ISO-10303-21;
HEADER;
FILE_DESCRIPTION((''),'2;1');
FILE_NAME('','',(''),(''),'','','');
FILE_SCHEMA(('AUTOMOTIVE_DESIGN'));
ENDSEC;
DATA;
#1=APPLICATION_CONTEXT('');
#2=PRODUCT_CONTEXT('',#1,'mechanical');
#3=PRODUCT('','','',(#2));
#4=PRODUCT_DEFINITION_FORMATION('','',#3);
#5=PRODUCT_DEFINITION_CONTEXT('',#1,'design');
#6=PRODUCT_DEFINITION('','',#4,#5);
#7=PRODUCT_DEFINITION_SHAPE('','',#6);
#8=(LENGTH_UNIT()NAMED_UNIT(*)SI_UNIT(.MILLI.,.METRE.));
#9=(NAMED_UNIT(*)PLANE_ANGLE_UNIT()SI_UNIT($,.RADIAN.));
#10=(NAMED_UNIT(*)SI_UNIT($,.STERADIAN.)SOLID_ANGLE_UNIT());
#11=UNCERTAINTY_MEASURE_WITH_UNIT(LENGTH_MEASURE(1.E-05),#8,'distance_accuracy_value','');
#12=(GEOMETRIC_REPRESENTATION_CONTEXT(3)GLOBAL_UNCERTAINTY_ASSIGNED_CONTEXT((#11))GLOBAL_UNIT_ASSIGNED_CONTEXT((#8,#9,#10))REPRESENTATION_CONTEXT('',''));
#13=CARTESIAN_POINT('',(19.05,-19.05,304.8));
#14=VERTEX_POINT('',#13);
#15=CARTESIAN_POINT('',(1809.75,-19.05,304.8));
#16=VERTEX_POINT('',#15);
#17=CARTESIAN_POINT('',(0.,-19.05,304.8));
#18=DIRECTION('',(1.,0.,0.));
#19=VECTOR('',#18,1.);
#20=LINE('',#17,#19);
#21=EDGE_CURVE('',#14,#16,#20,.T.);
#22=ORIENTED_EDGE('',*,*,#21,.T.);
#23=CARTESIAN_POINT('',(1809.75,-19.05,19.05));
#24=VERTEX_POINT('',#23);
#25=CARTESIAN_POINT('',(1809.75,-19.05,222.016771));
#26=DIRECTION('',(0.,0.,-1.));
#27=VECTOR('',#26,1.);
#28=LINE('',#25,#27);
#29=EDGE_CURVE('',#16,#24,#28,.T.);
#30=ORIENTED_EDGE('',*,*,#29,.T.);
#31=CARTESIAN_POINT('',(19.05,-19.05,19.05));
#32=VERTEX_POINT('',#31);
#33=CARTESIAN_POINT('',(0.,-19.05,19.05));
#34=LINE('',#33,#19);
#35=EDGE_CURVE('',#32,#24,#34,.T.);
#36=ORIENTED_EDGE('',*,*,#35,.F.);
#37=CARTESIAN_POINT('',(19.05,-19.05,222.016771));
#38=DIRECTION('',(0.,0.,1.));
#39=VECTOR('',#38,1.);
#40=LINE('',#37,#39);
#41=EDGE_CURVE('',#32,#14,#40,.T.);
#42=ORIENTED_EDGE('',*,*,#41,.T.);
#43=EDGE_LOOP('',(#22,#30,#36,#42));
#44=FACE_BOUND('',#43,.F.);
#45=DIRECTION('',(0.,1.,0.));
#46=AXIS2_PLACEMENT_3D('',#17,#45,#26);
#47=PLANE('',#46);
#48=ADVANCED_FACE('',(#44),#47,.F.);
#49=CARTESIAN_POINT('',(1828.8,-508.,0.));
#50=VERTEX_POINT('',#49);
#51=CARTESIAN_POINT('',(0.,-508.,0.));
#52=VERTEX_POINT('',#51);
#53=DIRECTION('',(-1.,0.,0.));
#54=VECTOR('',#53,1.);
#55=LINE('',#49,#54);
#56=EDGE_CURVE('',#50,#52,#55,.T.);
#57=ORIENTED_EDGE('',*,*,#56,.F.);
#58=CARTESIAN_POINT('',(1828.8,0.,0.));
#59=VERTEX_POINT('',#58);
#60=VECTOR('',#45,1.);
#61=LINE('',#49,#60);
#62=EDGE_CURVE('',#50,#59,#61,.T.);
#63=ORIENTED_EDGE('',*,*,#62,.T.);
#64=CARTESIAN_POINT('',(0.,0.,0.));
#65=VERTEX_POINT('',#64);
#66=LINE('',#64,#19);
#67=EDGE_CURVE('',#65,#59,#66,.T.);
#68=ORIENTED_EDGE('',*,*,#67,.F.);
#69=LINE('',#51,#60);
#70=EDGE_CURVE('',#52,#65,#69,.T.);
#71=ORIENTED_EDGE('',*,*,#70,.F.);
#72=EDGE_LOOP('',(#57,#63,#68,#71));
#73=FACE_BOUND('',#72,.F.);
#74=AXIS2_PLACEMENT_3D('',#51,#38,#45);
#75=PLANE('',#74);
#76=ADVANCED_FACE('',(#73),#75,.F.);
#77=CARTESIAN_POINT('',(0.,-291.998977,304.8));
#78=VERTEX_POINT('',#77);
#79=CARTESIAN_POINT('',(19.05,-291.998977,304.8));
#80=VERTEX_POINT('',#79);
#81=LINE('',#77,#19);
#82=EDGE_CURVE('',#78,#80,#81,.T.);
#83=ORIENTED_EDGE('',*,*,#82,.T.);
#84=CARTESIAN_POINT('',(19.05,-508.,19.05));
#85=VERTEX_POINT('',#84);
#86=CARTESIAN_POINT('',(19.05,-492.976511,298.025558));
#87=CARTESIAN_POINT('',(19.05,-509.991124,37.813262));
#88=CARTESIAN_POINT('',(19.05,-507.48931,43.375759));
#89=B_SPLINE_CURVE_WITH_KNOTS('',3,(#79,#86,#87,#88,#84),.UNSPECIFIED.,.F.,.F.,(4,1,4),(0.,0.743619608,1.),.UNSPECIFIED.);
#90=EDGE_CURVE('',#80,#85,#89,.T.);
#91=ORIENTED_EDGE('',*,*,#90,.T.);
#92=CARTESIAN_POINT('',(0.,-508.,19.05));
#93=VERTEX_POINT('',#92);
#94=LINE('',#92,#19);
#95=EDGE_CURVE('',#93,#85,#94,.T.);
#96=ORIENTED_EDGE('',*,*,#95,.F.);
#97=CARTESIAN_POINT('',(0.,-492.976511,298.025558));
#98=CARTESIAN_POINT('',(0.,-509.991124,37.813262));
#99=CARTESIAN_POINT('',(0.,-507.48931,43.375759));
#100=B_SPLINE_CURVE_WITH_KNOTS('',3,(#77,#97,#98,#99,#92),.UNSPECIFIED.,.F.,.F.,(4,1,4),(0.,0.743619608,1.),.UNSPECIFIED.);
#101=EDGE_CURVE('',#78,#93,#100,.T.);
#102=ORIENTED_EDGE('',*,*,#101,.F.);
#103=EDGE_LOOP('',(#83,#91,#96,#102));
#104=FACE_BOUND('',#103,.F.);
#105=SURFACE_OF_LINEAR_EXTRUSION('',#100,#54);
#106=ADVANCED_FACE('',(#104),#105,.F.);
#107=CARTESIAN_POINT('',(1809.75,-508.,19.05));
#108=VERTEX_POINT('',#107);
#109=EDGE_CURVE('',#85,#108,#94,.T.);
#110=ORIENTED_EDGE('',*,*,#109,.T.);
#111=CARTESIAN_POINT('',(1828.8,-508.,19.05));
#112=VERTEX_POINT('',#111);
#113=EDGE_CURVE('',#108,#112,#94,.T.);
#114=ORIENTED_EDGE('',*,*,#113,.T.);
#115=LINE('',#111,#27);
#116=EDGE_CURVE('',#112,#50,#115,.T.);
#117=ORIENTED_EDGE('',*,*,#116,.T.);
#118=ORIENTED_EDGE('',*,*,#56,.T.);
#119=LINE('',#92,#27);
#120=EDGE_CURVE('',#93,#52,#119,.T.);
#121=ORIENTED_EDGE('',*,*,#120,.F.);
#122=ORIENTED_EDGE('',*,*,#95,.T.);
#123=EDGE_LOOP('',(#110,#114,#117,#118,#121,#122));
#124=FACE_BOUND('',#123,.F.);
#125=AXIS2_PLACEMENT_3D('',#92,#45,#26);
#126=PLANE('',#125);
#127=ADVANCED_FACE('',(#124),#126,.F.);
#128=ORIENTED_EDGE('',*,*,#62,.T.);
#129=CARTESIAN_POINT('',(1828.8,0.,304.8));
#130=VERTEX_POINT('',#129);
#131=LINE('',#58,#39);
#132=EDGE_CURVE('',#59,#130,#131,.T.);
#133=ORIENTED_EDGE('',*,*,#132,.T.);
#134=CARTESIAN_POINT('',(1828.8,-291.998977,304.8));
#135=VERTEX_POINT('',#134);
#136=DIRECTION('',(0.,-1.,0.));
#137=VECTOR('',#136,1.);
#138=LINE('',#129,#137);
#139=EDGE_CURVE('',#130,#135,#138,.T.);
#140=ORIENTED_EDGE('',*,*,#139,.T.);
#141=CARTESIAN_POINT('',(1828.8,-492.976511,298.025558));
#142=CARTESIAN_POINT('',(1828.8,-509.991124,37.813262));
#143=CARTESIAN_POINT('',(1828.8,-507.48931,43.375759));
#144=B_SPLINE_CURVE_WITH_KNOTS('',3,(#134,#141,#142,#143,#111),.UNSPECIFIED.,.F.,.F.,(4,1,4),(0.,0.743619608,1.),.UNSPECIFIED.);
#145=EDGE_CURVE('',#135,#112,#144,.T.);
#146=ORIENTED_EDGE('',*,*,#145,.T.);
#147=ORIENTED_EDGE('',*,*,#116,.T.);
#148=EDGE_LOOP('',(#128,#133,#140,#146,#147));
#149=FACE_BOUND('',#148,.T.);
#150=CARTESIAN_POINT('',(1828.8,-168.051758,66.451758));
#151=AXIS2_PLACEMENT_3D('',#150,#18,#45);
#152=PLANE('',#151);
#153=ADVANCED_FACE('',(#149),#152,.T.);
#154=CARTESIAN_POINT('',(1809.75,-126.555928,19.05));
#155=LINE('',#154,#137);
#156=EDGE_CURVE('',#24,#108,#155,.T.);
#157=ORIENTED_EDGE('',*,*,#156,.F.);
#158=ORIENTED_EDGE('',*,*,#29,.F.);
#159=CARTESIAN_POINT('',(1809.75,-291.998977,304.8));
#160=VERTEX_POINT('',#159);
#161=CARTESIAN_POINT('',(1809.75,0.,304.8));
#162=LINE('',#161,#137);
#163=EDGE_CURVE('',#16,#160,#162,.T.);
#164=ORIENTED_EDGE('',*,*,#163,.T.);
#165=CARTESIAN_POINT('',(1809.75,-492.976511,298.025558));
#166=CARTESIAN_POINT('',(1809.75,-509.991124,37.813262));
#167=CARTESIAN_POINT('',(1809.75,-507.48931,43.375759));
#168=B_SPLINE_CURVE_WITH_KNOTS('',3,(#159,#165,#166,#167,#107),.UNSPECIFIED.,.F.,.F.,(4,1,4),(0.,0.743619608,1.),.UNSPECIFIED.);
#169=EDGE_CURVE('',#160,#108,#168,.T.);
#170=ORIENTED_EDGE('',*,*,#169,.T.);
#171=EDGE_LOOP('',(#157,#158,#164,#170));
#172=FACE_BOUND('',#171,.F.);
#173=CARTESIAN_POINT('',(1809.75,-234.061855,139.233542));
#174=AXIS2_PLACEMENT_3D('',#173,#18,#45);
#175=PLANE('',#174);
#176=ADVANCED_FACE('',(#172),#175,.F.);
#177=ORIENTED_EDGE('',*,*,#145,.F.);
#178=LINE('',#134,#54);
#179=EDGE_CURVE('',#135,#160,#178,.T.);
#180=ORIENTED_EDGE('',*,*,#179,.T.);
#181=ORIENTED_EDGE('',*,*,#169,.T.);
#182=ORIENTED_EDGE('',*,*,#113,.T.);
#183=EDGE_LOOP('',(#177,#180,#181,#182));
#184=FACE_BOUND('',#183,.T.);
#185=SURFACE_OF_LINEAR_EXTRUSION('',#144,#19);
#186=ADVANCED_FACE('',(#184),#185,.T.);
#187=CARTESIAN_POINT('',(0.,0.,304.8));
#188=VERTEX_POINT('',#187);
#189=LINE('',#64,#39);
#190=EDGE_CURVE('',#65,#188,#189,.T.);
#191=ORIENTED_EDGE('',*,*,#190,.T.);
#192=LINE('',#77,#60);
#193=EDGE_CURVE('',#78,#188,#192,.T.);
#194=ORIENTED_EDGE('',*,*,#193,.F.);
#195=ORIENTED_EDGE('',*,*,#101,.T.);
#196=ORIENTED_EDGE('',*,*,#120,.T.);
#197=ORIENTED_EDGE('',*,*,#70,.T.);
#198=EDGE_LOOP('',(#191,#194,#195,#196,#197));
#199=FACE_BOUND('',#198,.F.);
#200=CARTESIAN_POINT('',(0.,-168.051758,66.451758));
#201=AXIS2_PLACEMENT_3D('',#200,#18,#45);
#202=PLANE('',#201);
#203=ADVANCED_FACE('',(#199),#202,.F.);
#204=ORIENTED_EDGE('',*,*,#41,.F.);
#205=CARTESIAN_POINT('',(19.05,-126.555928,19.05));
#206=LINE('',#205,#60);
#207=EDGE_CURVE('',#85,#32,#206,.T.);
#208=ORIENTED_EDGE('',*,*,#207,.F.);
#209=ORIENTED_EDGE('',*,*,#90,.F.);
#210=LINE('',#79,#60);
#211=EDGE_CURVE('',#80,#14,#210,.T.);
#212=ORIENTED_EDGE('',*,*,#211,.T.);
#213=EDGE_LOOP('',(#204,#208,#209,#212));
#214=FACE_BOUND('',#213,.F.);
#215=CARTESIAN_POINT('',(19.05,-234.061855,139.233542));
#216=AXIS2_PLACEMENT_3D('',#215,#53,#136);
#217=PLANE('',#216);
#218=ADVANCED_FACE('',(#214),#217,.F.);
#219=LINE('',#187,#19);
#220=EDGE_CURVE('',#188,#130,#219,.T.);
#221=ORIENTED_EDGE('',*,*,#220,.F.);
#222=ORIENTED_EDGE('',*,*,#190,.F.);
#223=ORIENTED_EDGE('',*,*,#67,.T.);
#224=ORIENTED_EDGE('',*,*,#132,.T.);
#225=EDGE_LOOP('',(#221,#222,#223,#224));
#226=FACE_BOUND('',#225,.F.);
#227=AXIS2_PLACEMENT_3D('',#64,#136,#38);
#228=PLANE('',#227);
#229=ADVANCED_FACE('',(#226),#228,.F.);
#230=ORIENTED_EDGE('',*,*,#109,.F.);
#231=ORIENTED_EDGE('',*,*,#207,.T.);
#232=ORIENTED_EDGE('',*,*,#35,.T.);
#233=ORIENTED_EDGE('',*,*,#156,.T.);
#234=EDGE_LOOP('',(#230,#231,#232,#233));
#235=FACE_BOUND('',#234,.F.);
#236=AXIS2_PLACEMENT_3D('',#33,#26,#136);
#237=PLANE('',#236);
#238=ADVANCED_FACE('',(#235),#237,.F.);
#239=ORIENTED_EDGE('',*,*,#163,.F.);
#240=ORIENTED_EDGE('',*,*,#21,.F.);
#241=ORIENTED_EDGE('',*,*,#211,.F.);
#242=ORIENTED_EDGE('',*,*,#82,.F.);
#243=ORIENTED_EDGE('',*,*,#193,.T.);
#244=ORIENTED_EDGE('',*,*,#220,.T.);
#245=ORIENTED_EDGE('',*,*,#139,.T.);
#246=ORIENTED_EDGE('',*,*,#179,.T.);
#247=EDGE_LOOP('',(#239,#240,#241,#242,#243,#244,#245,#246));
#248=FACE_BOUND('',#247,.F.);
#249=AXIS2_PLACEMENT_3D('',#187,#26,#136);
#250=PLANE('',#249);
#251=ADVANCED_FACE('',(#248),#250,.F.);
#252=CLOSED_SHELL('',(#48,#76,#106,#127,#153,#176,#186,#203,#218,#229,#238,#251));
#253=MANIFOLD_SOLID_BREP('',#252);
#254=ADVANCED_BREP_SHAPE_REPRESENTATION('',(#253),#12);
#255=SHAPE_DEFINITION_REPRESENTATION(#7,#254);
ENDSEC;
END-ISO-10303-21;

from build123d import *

# Parameters (mm, degrees)
F1_DEPTH = 1828.8
F3_DEPTH = 19.05
F5_DEPTH = 19.05


# Not quite as in the source:
# - the dataset's text gives a spline's control points without its knots; the knots are read off the source's solid


with BuildPart() as f1:
    # F0 (on Right) → F1 (new body)
    with BuildSketch(Plane.YZ):
        Polygon((-508, 0), (0, 0), (0, 304.8), (-19.05, 304.8), (-19.05, 19.05), (-508, 19.05), align=None)
    extrude(amount=F1_DEPTH)

    # F2 (on face) → F3 (join)
    with BuildSketch(Plane.YZ.offset(1828.8)):
        with BuildLine():
            Line((-508, 19.05), (-508, 0))
            Line((-508, 0), (0, 0))
            Line((0, 0), (0, 304.8))
            Line((0, 304.8), (-19.05, 304.8))
            Line((-19.05, 304.8), (-291.9989773071, 304.8))
            add(Edge.make_bspline(
                [(-291.9989773071, 304.8), (-492.9765110924, 298.0255581824), (-509.9911244928, 37.8132619011), (-507.4893097422, 43.3757593081), (-508, 19.05)],
                knots=[0, 0, 0, 0, 0.7436196079, 1, 1, 1, 1], degree=3))
        make_face()
    extrude(amount=-F3_DEPTH)

    # F4 (on face) → F5 (join)
    with BuildSketch(Plane(origin=(0, 0, 0), x_dir=(0, -1, 0), z_dir=(-1, 0, 0))):
        with BuildLine():
            Line((19.05, 304.8), (0, 304.8))
            Line((0, 304.8), (0, 0))
            Line((0, 0), (508, 0))
            Line((508, 0), (508, 19.05))
            add(Edge.make_bspline(
                [(291.9989773071, 304.8), (492.9765110924, 298.0255581824), (509.9911244928, 37.8132619011), (507.4893097422, 43.3757593081), (508, 19.05)],
                knots=[0, 0, 0, 0, 0.7436196079, 1, 1, 1, 1], degree=3))
            Line((291.9989773071, 304.8), (19.05, 304.8))
        make_face()
    extrude(amount=-F5_DEPTH)


solid = f1.part
